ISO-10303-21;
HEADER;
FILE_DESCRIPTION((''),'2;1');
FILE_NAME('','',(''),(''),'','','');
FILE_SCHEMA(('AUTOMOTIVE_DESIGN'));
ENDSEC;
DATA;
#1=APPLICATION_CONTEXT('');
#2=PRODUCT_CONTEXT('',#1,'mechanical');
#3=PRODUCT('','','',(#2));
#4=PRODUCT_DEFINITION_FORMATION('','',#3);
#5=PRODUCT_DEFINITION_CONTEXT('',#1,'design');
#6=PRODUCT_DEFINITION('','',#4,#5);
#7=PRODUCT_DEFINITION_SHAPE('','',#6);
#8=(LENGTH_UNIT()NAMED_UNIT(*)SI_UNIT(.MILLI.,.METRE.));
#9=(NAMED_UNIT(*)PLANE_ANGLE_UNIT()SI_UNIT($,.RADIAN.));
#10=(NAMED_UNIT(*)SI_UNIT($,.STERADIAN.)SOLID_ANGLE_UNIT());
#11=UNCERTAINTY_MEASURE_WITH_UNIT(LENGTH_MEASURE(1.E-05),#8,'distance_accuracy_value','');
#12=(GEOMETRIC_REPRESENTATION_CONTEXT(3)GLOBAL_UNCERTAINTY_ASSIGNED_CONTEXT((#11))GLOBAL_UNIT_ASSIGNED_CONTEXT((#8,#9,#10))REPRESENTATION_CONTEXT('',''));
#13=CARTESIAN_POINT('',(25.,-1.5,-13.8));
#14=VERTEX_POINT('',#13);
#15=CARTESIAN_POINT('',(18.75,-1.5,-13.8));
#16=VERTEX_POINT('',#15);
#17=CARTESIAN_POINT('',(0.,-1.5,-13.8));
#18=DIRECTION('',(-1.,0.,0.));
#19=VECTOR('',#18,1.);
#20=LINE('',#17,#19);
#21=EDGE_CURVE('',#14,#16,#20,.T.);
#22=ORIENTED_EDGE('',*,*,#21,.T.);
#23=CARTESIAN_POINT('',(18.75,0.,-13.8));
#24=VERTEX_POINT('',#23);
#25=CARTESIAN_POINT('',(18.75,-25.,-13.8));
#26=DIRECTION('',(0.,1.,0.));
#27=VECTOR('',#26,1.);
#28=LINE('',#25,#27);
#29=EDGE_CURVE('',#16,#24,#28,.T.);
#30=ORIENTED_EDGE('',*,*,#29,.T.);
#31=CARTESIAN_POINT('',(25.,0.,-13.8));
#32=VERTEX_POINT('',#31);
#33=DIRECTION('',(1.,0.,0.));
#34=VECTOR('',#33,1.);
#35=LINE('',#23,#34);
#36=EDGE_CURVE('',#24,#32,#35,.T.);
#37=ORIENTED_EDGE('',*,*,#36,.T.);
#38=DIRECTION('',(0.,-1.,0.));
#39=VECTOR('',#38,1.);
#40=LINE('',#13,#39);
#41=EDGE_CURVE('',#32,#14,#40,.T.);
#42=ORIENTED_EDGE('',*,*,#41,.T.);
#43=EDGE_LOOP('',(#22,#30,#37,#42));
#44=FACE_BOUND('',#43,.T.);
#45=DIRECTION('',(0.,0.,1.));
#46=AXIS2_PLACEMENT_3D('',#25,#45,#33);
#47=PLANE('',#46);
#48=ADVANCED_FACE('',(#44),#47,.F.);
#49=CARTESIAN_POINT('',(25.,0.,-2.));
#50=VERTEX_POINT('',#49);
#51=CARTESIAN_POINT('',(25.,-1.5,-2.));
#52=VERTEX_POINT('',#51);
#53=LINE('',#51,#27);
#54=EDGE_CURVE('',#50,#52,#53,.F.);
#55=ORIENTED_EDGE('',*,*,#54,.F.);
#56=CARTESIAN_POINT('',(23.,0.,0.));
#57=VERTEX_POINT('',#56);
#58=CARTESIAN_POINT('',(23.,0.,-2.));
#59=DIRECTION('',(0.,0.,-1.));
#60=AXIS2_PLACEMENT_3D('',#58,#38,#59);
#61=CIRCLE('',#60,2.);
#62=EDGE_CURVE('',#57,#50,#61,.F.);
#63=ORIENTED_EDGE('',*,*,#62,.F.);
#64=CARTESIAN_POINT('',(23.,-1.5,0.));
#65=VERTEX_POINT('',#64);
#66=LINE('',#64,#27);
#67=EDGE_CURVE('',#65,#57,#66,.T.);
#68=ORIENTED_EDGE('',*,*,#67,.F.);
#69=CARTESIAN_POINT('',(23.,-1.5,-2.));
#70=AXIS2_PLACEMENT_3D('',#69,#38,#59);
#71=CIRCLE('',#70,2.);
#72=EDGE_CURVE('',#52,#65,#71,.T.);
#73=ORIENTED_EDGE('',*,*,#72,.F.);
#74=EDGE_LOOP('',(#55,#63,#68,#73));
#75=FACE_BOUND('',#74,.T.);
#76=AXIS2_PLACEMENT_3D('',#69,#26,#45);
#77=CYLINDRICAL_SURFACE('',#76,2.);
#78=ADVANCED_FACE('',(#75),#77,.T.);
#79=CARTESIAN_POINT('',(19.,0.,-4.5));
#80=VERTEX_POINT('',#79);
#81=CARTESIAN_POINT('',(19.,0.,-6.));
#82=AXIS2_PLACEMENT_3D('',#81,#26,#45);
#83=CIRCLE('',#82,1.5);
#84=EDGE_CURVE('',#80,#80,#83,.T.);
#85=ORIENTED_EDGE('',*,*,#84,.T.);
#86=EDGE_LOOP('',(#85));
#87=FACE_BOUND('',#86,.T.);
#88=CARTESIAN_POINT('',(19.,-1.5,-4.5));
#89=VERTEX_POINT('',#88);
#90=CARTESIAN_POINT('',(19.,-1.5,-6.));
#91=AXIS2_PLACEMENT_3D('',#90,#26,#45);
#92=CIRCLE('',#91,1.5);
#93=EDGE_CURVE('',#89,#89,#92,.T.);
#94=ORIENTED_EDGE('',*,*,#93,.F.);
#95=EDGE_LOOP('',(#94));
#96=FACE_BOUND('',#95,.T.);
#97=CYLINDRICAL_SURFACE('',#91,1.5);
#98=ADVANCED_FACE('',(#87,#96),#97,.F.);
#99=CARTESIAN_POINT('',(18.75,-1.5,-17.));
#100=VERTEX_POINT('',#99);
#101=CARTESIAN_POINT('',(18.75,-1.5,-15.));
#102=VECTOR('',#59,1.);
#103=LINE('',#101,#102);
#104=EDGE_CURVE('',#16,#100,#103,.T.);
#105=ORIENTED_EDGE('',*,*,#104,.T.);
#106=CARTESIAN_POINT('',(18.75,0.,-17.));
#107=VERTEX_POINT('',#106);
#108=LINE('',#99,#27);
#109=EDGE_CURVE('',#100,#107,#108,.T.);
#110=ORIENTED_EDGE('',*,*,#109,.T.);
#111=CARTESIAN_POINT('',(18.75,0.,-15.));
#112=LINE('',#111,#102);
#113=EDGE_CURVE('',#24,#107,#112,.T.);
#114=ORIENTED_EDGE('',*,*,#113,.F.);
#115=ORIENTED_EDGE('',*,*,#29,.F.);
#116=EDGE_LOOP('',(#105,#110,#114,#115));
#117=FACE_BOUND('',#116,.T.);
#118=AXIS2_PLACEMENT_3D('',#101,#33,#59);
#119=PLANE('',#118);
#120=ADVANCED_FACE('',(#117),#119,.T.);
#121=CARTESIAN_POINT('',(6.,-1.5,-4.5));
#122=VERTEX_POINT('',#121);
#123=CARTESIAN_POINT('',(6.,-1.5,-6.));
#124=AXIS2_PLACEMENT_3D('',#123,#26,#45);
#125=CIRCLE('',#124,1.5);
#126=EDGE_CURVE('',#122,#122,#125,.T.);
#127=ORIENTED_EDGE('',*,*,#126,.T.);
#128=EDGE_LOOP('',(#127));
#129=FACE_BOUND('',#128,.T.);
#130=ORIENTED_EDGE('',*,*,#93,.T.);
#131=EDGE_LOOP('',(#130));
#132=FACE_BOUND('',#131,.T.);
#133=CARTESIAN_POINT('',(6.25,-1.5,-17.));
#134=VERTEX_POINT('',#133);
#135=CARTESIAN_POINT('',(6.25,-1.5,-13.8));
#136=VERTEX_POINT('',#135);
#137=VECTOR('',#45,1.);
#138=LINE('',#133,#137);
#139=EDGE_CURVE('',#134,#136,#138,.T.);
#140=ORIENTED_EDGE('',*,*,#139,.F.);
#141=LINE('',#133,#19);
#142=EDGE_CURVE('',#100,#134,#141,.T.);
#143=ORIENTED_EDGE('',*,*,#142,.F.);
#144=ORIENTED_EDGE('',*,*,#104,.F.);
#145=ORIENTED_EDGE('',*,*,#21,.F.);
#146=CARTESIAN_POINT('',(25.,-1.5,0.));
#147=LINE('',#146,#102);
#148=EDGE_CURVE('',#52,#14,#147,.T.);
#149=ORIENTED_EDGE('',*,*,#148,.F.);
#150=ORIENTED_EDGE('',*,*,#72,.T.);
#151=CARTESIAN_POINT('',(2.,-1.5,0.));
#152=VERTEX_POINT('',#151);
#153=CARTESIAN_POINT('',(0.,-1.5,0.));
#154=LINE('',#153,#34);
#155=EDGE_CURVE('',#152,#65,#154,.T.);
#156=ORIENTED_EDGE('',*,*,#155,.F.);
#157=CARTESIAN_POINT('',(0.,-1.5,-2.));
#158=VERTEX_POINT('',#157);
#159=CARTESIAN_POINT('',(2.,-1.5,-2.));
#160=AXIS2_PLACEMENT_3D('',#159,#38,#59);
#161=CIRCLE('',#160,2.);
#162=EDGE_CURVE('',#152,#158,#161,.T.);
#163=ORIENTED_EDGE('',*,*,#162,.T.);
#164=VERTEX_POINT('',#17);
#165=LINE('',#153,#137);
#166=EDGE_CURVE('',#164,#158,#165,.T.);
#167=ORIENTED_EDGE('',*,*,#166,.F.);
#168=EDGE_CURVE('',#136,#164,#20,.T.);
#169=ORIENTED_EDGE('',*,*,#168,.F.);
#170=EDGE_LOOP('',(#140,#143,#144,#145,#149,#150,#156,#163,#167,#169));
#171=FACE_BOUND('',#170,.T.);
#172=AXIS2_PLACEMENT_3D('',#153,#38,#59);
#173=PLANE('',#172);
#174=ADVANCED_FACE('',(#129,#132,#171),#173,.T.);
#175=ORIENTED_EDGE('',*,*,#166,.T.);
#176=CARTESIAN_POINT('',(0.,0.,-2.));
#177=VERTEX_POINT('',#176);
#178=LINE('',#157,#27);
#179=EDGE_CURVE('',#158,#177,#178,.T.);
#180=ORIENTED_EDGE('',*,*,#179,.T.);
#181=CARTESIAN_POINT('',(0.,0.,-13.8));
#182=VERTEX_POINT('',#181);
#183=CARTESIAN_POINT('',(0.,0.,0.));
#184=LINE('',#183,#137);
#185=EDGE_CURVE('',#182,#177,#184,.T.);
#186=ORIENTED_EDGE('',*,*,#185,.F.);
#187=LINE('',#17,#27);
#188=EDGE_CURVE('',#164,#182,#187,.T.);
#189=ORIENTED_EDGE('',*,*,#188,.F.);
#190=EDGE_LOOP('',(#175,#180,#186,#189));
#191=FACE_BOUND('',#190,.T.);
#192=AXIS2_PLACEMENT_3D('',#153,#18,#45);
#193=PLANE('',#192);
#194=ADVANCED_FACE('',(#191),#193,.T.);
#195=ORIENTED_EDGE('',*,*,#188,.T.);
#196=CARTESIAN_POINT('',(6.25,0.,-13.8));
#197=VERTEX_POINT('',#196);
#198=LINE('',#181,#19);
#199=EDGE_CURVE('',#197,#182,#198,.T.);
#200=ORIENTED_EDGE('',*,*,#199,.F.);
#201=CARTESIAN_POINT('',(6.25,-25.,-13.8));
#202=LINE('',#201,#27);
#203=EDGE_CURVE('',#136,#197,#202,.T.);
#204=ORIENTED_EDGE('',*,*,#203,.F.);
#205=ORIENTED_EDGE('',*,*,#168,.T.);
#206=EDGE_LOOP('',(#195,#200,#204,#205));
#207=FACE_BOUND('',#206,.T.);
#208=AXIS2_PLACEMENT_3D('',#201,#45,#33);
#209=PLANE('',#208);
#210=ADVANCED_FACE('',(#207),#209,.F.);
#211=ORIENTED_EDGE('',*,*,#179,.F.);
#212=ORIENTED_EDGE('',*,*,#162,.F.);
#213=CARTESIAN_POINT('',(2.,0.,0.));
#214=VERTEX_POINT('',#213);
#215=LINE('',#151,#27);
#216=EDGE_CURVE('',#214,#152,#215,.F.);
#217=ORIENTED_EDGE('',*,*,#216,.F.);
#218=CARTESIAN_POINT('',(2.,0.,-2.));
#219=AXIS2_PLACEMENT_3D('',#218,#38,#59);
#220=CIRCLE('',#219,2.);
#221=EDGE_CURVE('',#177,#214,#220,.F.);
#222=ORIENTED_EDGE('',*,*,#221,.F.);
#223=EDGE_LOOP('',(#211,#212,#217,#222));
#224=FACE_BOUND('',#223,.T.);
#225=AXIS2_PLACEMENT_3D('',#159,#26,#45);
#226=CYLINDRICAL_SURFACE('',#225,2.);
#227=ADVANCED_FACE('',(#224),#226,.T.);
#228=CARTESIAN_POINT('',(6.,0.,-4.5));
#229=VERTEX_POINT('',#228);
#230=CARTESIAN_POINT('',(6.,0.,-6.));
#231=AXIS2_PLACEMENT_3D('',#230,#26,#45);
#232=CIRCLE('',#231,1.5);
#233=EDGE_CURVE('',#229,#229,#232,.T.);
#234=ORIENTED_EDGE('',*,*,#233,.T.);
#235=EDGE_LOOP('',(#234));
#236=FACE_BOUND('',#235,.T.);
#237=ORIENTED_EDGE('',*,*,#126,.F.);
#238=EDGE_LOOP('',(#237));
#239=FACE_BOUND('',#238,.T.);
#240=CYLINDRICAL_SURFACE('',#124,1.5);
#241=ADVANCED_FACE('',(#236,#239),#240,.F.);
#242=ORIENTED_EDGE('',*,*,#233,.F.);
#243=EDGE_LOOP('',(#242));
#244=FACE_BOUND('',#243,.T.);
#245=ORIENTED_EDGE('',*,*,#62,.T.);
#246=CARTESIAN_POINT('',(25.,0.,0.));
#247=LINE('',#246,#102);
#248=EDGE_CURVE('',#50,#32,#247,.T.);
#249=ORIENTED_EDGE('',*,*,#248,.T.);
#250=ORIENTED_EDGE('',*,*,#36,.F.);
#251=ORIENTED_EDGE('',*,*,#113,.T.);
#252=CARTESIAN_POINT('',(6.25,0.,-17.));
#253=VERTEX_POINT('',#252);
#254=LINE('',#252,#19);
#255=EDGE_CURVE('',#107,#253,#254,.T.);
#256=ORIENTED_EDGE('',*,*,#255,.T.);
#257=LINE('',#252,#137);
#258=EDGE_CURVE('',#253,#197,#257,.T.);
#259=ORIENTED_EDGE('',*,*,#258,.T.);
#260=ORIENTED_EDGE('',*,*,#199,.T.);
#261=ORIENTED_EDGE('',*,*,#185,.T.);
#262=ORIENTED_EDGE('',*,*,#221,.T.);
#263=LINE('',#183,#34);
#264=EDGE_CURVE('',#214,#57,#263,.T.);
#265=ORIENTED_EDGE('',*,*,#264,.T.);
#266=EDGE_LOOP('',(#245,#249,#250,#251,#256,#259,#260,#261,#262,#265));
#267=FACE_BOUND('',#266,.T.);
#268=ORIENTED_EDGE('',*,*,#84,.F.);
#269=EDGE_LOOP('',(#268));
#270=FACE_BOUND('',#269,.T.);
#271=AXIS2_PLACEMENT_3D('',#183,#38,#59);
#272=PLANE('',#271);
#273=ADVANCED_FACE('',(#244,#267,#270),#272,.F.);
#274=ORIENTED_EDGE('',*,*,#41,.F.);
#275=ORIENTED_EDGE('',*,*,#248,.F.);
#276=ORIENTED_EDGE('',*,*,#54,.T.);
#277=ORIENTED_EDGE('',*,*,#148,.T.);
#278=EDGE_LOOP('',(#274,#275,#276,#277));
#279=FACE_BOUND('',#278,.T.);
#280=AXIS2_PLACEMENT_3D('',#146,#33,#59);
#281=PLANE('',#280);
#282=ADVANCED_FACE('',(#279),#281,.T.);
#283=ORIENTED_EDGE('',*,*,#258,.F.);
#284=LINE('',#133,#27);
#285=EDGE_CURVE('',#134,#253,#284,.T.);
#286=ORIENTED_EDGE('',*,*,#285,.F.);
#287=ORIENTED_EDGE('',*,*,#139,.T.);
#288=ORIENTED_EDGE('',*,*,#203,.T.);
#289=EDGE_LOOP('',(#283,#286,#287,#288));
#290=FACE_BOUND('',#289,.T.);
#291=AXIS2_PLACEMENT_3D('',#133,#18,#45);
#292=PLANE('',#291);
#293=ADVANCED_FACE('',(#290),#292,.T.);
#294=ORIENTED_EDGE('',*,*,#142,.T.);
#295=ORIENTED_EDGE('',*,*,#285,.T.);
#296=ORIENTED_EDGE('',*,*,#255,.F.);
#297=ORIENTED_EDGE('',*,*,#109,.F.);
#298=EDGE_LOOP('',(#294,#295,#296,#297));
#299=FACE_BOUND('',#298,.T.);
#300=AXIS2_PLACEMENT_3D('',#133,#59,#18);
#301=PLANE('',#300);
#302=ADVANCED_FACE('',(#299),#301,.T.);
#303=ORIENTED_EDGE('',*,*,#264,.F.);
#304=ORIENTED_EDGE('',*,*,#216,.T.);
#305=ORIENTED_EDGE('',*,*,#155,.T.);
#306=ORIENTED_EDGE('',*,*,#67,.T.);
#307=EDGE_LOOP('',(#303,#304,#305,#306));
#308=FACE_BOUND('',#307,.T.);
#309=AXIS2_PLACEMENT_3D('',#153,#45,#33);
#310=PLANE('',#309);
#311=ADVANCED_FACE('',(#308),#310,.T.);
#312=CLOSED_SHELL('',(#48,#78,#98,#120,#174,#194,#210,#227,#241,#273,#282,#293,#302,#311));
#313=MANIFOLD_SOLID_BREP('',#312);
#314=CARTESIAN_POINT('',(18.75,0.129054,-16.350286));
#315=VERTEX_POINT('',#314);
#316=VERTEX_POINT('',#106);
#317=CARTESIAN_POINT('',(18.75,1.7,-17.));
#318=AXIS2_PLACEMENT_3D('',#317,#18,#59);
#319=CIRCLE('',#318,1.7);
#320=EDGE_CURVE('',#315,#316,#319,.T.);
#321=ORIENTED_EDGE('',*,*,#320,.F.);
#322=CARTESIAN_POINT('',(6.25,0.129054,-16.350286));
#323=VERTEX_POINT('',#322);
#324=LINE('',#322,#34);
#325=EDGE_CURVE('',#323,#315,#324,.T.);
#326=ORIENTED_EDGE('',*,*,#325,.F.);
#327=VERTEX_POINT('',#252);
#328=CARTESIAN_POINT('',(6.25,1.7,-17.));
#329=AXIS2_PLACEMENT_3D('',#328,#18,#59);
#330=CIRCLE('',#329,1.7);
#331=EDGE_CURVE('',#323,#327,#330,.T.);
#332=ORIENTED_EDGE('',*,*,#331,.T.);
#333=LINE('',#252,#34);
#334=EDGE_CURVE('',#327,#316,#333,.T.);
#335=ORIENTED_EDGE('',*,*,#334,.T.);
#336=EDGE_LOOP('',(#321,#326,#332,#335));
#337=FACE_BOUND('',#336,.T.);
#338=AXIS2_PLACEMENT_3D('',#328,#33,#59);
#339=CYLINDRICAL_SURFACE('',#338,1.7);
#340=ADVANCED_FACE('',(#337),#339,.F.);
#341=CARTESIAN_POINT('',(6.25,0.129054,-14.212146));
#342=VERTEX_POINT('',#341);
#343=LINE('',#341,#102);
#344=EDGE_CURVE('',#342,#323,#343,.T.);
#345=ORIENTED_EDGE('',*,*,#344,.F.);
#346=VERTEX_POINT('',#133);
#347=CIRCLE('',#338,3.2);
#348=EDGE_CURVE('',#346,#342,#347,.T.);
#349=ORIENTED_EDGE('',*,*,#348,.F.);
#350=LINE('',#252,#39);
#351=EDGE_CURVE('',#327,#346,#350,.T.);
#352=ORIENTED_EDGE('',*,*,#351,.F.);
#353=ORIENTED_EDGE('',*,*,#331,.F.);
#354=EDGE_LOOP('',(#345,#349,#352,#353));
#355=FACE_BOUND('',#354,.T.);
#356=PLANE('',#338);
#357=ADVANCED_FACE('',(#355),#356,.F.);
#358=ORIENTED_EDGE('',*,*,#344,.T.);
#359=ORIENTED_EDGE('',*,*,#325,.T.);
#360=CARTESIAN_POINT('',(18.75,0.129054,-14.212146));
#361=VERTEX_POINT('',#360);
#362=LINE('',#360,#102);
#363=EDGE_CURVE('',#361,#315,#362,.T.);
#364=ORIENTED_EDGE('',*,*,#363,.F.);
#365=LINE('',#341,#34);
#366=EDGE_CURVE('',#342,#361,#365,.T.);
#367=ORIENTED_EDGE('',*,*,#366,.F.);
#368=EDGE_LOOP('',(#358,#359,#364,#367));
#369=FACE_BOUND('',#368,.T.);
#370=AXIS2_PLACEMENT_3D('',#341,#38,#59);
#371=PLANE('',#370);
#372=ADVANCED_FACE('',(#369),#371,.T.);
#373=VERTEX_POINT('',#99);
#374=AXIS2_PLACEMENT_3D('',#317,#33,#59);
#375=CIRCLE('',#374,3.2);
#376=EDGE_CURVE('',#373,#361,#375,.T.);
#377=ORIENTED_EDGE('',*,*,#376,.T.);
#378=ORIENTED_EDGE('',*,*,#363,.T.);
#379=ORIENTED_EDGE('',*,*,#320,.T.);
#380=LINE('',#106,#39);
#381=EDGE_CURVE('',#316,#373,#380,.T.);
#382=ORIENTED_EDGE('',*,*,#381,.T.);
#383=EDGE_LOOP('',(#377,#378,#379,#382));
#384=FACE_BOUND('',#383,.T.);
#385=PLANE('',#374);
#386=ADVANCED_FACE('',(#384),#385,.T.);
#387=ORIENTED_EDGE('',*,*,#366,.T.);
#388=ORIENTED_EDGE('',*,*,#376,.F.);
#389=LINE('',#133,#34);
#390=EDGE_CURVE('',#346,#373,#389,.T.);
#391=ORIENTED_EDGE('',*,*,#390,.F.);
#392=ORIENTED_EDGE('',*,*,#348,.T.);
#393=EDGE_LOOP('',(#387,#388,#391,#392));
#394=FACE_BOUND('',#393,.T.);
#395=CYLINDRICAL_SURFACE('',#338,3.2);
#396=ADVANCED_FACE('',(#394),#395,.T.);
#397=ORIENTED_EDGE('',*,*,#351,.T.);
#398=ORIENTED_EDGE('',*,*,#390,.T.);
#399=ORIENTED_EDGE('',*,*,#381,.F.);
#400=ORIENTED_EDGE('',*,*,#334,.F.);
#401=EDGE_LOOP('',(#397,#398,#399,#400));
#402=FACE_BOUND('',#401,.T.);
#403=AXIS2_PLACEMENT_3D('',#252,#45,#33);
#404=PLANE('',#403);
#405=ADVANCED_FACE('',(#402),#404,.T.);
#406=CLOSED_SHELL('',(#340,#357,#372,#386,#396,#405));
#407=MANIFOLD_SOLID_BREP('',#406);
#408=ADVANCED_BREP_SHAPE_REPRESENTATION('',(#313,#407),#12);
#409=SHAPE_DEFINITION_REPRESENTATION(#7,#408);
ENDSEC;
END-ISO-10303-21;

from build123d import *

# Parameters (mm, degrees)
SKETCH_1_W             = 25
SKETCH_1_H             = 15
SM_BASE_FLANGE_1_DEPTH = 1.5
SKETCH_6_W             = 12.5
SKETCH_6_H             = 2
EXTRUDE_1_DEPTH        = 1.5
SM_BASE_FLANGE_2_DEPTH = 12.5
SKETCH_10_R            = 1.5
CUT_EXTRUDE_1_DEPTH    = 33.512305363
FILLET_1_R             = 2
SKETCH_11_W            = 7.74464046
SKETCH_11_H            = 1.2
SKETCH_11_W_2          = 7.487333485
CUT_EXTRUDE_2_DEPTH    = 25


# Sheet-metal steps are written as plain solids
with BuildPart() as part:
    # Sketch 1 → 基体-法兰1 (new body)
    with BuildSketch(Plane(origin=(0, 0, 0), x_dir=(1, 0, 0), z_dir=(0, 1, 0))):
        with Locations((12.5, 7.5)):
            Rectangle(SKETCH_1_W, SKETCH_1_H)
    extrude(amount=-SM_BASE_FLANGE_1_DEPTH)

    # 草图6 → 凸台-拉伸1 (add)
    with BuildSketch(Plane(origin=(0, 0, 0), x_dir=(1, 0, 0), z_dir=(0, 1, 0))):
        with Locations((12.5, 16)):
            Rectangle(SKETCH_6_W, SKETCH_6_H)
    extrude(amount=-EXTRUDE_1_DEPTH)

    # 草图10 → 切除-拉伸1 (cut, through all)
    with BuildSketch(Plane(origin=(0, 0, 0), x_dir=(1, 0, 0), z_dir=(0, 1, 0))):
        with Locations(Location((19, 6, 0), (0, 0, 270))):
            Circle(SKETCH_10_R)
        with Locations(Location((6, 6, 0), (0, 0, 270))):
            Circle(SKETCH_10_R)
    extrude(amount=-CUT_EXTRUDE_1_DEPTH, mode=Mode.SUBTRACT)

    # 圆角1
    fillet_1_edges = [part.edges().sort_by_distance(p)[0] for p in [
        (25, -0.75, 0),
        (0, -0.75, 0),
    ]]
    fillet(fillet_1_edges, radius=FILLET_1_R)

    # 草图11 → 切除-拉伸2 (cut)
    with BuildSketch(Plane(origin=(0, 0, 0), x_dir=(1, 0, 0), z_dir=(0, 1, 0))):
        with Locations((22.62232023, 14.4)):
            Rectangle(SKETCH_11_W, SKETCH_11_H)
        with Locations((2.506333257, 14.4)):
            Rectangle(SKETCH_11_W_2, SKETCH_11_H)
    extrude(amount=-CUT_EXTRUDE_2_DEPTH, mode=Mode.SUBTRACT)


with BuildPart() as body_2:
    # 草图7 → 基体-法兰2 (new body)
    with BuildSketch(Plane(origin=(18.75, 0, 0), x_dir=(0, 0, -1), z_dir=(1, 0, 0))):
        with BuildLine():
            Line((17, 0), (17, -1.5))
            ThreePointArc((17, -1.5), (18.614461494, 4.462881482), (14.212146397, 0.129053697))
            Line((14.212146397, 0.129053697), (16.350286437, 0.129053697))
            ThreePointArc((16.350286437, 0.129053697), (17.331203325, 3.367424468), (17, 0))
        make_face()
    extrude(amount=-SM_BASE_FLANGE_2_DEPTH)


solid = Compound([part.part, body_2.part])
